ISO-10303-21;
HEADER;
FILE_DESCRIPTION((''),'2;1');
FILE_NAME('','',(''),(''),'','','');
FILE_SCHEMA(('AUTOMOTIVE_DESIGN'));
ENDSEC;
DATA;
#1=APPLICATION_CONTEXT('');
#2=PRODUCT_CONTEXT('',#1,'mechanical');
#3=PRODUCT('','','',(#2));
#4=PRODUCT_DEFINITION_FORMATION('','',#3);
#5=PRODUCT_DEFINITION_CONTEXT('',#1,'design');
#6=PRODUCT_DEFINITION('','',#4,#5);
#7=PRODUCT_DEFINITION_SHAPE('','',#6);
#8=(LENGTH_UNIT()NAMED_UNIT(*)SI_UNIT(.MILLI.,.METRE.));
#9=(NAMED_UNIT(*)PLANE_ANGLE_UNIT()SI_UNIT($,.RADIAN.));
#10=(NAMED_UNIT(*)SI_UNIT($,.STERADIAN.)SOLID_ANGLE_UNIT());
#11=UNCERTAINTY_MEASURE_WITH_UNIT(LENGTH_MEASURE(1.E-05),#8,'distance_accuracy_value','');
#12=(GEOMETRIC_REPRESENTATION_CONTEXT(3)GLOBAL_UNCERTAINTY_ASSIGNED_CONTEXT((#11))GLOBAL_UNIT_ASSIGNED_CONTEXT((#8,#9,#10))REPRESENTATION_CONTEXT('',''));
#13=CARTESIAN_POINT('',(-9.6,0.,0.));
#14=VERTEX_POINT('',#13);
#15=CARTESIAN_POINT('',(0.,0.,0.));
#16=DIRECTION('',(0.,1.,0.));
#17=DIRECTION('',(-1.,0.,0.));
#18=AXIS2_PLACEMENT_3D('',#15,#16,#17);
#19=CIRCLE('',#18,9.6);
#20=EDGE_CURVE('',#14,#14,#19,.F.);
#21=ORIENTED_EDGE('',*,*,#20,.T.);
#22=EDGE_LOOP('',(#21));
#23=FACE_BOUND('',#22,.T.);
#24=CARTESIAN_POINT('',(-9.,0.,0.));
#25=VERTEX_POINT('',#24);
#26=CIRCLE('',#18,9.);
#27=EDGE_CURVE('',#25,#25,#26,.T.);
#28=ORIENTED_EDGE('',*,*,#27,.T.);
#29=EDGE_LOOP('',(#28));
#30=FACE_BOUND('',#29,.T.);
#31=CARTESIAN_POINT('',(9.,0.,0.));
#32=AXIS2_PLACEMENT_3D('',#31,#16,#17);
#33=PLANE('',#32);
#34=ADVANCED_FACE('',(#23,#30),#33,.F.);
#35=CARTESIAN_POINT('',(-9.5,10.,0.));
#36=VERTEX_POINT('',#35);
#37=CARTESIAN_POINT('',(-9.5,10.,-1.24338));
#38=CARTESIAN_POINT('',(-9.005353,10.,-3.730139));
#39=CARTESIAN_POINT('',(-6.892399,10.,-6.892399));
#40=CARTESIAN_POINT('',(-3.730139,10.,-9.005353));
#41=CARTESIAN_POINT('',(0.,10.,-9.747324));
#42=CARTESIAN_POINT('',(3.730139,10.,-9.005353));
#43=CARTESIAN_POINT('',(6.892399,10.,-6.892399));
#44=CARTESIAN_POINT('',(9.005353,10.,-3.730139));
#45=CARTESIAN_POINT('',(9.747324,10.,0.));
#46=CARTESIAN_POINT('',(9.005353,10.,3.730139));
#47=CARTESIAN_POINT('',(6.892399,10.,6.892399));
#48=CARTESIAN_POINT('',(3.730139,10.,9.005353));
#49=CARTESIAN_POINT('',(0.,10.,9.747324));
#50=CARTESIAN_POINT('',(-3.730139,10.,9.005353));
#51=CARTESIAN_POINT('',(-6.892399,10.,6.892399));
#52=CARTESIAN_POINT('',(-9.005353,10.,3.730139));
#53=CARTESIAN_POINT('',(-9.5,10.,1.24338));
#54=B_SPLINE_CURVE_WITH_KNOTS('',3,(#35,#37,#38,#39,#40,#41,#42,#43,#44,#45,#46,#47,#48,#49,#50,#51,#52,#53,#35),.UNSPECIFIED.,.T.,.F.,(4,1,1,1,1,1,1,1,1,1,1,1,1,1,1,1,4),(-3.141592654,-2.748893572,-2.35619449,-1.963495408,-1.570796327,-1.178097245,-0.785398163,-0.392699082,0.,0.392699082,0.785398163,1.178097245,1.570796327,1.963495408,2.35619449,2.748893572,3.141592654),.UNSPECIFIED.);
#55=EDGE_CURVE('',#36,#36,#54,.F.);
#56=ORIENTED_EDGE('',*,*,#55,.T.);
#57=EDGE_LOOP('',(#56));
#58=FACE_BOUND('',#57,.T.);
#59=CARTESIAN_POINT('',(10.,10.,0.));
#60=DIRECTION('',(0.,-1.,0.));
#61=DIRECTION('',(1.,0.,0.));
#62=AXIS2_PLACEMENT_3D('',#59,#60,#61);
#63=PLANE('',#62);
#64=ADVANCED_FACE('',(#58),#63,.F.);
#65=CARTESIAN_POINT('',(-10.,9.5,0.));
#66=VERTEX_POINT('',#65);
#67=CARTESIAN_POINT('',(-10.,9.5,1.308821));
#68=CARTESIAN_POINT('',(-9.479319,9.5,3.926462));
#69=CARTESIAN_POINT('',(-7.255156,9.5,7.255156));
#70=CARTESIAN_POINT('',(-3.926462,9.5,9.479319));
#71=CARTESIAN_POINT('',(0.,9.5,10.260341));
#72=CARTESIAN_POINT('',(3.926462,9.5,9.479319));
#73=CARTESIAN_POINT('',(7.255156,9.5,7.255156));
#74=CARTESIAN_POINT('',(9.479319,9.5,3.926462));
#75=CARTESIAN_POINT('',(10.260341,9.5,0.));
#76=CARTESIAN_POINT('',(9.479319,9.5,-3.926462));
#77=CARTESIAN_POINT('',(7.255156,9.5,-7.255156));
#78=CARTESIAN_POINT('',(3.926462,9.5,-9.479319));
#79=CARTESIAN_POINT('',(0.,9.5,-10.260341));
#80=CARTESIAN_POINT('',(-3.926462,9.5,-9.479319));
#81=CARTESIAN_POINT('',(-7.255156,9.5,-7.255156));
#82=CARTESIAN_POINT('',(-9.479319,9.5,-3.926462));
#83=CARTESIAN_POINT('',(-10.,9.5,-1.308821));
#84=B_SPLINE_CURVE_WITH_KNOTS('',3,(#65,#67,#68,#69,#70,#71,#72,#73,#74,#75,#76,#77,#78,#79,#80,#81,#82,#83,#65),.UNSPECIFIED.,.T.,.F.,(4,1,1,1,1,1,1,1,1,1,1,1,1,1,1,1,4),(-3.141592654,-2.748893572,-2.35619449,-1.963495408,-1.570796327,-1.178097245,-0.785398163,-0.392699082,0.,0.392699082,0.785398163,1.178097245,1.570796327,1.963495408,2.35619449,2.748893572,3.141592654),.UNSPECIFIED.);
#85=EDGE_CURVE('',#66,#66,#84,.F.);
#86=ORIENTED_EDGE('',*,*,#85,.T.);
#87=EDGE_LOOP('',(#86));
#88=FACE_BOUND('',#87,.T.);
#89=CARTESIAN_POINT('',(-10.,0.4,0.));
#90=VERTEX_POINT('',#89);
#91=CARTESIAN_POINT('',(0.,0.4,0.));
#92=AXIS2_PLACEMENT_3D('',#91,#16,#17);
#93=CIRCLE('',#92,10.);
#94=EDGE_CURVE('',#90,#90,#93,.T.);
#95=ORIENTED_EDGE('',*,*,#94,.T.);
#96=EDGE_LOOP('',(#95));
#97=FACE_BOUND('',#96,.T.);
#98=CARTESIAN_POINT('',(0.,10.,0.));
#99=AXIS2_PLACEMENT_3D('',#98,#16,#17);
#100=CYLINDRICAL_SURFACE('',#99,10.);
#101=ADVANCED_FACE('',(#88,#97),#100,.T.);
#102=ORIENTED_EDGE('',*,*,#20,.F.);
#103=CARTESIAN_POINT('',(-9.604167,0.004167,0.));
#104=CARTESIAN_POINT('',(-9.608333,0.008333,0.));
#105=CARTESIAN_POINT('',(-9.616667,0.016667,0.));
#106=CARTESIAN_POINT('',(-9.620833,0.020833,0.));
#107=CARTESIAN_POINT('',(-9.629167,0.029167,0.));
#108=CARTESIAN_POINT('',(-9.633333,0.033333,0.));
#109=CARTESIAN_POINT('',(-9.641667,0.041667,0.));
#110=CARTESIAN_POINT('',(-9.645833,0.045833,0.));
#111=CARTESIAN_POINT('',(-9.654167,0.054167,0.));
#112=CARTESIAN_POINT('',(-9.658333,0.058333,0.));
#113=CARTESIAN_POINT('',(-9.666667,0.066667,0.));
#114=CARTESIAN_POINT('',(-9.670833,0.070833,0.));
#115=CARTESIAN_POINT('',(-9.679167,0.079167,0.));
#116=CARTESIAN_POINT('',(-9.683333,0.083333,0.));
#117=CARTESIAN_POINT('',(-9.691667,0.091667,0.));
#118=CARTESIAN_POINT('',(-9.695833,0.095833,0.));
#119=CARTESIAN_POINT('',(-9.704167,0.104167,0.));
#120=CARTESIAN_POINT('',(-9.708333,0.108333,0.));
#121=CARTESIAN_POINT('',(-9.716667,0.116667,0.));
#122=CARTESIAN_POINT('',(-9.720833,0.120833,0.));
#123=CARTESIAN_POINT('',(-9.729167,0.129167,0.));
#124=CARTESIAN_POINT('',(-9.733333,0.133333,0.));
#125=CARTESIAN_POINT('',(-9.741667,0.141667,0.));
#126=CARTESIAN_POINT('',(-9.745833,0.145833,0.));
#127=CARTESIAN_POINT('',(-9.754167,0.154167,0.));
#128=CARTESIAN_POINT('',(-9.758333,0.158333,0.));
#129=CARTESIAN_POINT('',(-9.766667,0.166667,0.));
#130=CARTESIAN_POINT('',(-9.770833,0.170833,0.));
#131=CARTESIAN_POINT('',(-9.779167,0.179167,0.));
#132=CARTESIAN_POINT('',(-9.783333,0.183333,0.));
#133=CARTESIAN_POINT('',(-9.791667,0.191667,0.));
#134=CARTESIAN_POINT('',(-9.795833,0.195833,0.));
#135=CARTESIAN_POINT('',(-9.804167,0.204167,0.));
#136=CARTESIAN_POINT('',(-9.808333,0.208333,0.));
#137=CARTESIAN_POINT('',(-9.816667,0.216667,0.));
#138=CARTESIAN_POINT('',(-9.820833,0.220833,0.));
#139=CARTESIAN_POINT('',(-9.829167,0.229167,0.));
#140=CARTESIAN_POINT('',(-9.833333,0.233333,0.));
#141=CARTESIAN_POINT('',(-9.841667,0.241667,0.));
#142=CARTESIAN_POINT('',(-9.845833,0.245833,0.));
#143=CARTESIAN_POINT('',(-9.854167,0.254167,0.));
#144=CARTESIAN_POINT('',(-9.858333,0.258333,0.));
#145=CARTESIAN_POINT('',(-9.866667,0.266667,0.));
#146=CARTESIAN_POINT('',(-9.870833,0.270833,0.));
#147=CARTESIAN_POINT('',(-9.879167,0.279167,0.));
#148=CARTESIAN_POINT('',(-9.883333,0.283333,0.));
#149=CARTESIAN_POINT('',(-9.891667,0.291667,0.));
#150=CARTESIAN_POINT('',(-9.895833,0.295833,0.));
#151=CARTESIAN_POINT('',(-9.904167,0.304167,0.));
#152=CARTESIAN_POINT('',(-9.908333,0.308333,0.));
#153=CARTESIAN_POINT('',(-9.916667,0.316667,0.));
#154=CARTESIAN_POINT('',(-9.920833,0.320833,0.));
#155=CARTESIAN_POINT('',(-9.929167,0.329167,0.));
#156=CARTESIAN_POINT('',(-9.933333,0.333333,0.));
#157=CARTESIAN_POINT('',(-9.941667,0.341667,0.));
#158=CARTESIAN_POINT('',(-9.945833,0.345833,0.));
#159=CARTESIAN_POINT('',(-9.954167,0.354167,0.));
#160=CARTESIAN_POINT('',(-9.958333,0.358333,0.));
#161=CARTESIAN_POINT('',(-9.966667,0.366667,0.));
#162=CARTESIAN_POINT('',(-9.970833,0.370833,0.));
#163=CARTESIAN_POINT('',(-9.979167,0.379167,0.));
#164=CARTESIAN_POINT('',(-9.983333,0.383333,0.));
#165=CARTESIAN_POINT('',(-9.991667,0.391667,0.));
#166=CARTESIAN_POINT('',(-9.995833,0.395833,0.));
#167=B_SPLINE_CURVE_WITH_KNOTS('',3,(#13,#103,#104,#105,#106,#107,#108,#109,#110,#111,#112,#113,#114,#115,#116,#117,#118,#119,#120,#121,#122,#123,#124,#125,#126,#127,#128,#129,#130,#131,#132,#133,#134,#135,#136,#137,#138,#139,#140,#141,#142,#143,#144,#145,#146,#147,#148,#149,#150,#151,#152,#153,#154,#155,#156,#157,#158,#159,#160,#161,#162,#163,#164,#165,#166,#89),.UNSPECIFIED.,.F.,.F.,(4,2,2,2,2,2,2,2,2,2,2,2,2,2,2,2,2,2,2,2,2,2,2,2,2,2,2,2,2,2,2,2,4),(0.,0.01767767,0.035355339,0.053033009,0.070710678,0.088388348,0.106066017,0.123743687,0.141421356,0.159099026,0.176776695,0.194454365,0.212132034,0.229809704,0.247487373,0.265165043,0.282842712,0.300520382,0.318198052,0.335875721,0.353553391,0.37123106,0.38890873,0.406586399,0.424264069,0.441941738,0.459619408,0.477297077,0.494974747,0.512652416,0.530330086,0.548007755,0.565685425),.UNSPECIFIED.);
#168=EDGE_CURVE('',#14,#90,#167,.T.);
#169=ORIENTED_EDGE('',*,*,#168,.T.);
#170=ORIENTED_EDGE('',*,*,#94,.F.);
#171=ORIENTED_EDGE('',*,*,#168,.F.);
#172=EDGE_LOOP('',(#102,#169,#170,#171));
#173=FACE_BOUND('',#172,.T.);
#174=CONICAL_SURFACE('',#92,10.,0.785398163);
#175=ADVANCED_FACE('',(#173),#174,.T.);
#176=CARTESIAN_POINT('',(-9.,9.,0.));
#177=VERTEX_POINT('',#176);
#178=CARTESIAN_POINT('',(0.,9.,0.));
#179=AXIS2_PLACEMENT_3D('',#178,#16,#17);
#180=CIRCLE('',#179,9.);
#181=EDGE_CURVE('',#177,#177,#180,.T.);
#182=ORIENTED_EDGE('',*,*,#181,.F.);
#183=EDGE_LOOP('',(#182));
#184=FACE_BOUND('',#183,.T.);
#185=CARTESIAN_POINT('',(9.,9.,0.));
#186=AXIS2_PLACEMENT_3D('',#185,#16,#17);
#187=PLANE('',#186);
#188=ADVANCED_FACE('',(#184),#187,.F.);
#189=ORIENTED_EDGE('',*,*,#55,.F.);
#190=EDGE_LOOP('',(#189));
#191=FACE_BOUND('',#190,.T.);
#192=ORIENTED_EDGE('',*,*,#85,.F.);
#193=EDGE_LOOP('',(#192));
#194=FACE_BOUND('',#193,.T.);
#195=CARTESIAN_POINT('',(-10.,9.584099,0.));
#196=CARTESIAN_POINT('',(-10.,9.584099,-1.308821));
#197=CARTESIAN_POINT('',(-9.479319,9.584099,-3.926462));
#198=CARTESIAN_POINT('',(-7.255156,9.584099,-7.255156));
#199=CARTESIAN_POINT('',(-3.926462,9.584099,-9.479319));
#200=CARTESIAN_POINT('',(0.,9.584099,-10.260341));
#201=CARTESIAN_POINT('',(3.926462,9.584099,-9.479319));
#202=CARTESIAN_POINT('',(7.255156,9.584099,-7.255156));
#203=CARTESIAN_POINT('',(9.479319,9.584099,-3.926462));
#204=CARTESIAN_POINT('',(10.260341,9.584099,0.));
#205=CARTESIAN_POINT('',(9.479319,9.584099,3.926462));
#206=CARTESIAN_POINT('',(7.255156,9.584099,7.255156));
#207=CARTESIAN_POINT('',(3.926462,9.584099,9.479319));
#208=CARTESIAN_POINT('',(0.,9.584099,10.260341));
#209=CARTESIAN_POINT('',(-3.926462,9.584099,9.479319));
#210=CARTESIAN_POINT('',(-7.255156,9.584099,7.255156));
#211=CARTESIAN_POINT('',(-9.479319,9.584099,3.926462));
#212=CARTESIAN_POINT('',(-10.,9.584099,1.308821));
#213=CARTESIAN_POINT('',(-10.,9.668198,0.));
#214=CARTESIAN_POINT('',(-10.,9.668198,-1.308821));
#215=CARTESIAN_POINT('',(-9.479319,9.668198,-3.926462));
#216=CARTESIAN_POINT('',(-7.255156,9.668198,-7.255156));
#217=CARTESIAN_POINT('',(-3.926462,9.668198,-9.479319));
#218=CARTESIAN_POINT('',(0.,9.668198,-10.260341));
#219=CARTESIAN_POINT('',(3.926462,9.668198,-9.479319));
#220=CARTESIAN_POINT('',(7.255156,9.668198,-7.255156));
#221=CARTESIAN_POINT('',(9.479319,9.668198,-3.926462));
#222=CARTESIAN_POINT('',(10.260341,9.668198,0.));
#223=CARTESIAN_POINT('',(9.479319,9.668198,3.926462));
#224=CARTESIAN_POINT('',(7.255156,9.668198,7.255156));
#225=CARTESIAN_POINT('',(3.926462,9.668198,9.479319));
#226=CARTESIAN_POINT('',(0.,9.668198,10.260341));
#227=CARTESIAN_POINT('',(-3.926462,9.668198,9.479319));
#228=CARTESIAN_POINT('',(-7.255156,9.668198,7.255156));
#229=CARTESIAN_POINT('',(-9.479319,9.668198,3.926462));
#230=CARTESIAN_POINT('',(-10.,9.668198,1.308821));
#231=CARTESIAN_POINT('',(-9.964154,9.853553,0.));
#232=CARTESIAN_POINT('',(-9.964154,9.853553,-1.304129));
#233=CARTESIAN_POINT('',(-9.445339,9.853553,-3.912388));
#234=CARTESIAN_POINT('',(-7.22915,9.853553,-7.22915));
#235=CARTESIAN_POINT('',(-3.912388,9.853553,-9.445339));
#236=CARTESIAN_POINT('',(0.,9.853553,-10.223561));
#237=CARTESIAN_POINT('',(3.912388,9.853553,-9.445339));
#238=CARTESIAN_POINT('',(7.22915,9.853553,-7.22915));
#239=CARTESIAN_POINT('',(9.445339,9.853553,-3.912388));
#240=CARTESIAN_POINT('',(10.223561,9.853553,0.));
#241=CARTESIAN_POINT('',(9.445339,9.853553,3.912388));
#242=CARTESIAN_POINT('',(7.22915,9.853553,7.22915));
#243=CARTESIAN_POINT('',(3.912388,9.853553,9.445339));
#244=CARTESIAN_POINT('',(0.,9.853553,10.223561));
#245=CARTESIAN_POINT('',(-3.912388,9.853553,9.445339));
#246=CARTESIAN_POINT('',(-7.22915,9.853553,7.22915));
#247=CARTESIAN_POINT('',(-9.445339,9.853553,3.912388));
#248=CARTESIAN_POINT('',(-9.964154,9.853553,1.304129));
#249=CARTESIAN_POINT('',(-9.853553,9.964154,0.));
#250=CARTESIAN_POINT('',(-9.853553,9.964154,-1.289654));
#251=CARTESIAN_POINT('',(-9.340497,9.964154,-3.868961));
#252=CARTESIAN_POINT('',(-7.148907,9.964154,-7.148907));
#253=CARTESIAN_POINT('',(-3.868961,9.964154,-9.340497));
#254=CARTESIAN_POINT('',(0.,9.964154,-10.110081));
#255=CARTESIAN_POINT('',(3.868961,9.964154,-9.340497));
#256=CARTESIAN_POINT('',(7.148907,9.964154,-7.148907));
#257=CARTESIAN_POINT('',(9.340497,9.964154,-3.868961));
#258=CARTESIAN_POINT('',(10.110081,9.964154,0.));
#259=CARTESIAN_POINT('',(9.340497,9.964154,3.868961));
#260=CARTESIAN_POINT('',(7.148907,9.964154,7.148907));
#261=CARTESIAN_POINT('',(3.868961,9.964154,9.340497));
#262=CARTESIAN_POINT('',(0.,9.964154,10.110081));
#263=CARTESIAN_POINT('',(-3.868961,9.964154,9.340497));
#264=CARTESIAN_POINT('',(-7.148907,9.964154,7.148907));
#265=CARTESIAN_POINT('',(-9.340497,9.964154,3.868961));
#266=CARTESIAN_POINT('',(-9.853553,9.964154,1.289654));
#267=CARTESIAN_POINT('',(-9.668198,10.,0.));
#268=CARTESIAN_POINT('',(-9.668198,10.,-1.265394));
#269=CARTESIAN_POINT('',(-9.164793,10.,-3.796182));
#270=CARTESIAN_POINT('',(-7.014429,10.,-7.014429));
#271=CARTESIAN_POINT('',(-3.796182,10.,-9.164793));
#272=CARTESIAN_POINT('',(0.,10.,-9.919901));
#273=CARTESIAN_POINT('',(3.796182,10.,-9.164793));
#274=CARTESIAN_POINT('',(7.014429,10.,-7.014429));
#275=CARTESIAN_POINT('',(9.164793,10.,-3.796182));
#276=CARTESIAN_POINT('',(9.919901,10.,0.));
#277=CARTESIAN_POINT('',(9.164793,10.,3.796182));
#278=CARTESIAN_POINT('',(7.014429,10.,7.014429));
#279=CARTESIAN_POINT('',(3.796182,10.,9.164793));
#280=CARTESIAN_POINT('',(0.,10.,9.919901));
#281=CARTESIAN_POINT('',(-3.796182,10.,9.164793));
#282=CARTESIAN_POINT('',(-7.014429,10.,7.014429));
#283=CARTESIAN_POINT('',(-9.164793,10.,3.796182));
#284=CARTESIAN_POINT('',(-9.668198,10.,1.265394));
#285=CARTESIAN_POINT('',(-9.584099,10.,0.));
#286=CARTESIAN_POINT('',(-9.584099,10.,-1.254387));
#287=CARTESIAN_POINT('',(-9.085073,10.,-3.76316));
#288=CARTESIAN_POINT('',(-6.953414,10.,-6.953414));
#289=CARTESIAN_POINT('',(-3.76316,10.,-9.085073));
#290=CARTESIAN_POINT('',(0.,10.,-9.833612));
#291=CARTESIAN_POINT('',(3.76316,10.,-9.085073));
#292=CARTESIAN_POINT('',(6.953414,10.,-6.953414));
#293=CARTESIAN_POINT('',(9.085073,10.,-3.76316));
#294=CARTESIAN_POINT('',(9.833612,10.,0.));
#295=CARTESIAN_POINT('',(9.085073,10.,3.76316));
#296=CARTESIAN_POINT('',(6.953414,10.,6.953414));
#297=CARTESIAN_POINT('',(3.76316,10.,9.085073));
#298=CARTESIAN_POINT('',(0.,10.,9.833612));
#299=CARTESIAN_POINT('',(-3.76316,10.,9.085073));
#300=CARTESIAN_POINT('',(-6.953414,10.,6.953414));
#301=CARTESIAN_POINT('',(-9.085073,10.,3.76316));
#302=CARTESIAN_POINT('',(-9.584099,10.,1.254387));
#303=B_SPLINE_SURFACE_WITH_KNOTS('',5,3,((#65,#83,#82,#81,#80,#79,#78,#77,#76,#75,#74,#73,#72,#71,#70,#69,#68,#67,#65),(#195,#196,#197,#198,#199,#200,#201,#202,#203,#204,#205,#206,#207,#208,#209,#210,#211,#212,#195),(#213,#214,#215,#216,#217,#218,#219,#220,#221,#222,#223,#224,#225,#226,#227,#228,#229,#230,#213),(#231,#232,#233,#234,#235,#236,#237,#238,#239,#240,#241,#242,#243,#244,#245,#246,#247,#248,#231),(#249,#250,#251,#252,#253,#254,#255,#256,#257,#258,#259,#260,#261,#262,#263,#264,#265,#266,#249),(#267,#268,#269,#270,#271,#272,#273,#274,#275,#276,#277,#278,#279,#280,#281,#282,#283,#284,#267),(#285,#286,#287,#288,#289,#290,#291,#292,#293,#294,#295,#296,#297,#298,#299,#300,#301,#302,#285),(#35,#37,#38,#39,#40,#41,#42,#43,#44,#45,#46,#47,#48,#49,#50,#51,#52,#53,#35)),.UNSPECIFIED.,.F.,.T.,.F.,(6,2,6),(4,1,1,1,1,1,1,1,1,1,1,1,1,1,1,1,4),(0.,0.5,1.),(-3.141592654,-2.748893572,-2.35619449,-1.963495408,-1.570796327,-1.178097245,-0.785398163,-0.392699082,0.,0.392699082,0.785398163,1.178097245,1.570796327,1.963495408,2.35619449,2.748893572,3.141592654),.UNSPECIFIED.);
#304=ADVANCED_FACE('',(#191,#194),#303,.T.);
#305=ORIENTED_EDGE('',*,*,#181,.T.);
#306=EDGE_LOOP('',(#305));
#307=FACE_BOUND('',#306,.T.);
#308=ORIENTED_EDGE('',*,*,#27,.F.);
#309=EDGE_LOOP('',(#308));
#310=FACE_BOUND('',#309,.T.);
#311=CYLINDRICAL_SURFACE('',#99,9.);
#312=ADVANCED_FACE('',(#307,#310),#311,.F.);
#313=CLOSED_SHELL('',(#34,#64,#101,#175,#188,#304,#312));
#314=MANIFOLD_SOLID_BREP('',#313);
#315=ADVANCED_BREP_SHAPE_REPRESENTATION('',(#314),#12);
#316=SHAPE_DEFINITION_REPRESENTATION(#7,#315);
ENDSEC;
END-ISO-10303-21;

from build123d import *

# Parameters (mm, degrees)
FILLET1_SIZE  = 0.5
CHAMFER1_SIZE = 0.4


with BuildPart() as part:
    # Sketch1 → Revolve1 (revolve)
    with BuildSketch(Plane.XY, mode=Mode.PRIVATE) as revolve1_sk:
        Polygon((10, 0), (10, 10), (0, 10), (0, 9), (9, 9), (9, 0), align=None)
    revolve(revolve1_sk.sketch.rotate(Axis((0, 10, 0), (0, -1, 0)), 180), axis=Axis((0, 10, 0), (0, -1, 0)))

    # Fillet1
    # a fillet whose section is not a circle: 0.5 mm, written as the material it takes off along each edge
    with BuildSketch(Plane(origin=(0, 10, 0), x_dir=(-1, 0, 0), z_dir=(0, 0, 1))) as fillet1_piece_1:
        with BuildLine():
            add(Edge.make_bspline([(10, FILLET1_SIZE), (10, FILLET1_SIZE * 0.831801948466), (10, FILLET1_SIZE * 0.663603896932), (10 - FILLET1_SIZE * 0.0716919198361, FILLET1_SIZE * 0.292893218813), (10 - FILLET1_SIZE * 0.292893218813, FILLET1_SIZE * 0.0716919198361), (10 - FILLET1_SIZE * 0.663603896932, 0), (10 - FILLET1_SIZE * 0.831801948466, 0), (10 - FILLET1_SIZE, 0)], knots=[0, 0, 0, 0, 0, 0, 0.5, 0.5, 1, 1, 1, 1, 1, 1], degree=5))
            Line((10 - FILLET1_SIZE, 0), (10, 0))
            Line((10, 0), (10, FILLET1_SIZE))
        make_face()
    revolve(axis=Axis((0, 10, 0), (0, -1, 0)), mode=Mode.SUBTRACT)

    # Chamfer1
    chamfer1_edges = [part.edges().sort_by_distance(p)[0] for p in [
        (10, 0, 0),
    ]]
    chamfer(chamfer1_edges, length=CHAMFER1_SIZE)


solid = part.part
